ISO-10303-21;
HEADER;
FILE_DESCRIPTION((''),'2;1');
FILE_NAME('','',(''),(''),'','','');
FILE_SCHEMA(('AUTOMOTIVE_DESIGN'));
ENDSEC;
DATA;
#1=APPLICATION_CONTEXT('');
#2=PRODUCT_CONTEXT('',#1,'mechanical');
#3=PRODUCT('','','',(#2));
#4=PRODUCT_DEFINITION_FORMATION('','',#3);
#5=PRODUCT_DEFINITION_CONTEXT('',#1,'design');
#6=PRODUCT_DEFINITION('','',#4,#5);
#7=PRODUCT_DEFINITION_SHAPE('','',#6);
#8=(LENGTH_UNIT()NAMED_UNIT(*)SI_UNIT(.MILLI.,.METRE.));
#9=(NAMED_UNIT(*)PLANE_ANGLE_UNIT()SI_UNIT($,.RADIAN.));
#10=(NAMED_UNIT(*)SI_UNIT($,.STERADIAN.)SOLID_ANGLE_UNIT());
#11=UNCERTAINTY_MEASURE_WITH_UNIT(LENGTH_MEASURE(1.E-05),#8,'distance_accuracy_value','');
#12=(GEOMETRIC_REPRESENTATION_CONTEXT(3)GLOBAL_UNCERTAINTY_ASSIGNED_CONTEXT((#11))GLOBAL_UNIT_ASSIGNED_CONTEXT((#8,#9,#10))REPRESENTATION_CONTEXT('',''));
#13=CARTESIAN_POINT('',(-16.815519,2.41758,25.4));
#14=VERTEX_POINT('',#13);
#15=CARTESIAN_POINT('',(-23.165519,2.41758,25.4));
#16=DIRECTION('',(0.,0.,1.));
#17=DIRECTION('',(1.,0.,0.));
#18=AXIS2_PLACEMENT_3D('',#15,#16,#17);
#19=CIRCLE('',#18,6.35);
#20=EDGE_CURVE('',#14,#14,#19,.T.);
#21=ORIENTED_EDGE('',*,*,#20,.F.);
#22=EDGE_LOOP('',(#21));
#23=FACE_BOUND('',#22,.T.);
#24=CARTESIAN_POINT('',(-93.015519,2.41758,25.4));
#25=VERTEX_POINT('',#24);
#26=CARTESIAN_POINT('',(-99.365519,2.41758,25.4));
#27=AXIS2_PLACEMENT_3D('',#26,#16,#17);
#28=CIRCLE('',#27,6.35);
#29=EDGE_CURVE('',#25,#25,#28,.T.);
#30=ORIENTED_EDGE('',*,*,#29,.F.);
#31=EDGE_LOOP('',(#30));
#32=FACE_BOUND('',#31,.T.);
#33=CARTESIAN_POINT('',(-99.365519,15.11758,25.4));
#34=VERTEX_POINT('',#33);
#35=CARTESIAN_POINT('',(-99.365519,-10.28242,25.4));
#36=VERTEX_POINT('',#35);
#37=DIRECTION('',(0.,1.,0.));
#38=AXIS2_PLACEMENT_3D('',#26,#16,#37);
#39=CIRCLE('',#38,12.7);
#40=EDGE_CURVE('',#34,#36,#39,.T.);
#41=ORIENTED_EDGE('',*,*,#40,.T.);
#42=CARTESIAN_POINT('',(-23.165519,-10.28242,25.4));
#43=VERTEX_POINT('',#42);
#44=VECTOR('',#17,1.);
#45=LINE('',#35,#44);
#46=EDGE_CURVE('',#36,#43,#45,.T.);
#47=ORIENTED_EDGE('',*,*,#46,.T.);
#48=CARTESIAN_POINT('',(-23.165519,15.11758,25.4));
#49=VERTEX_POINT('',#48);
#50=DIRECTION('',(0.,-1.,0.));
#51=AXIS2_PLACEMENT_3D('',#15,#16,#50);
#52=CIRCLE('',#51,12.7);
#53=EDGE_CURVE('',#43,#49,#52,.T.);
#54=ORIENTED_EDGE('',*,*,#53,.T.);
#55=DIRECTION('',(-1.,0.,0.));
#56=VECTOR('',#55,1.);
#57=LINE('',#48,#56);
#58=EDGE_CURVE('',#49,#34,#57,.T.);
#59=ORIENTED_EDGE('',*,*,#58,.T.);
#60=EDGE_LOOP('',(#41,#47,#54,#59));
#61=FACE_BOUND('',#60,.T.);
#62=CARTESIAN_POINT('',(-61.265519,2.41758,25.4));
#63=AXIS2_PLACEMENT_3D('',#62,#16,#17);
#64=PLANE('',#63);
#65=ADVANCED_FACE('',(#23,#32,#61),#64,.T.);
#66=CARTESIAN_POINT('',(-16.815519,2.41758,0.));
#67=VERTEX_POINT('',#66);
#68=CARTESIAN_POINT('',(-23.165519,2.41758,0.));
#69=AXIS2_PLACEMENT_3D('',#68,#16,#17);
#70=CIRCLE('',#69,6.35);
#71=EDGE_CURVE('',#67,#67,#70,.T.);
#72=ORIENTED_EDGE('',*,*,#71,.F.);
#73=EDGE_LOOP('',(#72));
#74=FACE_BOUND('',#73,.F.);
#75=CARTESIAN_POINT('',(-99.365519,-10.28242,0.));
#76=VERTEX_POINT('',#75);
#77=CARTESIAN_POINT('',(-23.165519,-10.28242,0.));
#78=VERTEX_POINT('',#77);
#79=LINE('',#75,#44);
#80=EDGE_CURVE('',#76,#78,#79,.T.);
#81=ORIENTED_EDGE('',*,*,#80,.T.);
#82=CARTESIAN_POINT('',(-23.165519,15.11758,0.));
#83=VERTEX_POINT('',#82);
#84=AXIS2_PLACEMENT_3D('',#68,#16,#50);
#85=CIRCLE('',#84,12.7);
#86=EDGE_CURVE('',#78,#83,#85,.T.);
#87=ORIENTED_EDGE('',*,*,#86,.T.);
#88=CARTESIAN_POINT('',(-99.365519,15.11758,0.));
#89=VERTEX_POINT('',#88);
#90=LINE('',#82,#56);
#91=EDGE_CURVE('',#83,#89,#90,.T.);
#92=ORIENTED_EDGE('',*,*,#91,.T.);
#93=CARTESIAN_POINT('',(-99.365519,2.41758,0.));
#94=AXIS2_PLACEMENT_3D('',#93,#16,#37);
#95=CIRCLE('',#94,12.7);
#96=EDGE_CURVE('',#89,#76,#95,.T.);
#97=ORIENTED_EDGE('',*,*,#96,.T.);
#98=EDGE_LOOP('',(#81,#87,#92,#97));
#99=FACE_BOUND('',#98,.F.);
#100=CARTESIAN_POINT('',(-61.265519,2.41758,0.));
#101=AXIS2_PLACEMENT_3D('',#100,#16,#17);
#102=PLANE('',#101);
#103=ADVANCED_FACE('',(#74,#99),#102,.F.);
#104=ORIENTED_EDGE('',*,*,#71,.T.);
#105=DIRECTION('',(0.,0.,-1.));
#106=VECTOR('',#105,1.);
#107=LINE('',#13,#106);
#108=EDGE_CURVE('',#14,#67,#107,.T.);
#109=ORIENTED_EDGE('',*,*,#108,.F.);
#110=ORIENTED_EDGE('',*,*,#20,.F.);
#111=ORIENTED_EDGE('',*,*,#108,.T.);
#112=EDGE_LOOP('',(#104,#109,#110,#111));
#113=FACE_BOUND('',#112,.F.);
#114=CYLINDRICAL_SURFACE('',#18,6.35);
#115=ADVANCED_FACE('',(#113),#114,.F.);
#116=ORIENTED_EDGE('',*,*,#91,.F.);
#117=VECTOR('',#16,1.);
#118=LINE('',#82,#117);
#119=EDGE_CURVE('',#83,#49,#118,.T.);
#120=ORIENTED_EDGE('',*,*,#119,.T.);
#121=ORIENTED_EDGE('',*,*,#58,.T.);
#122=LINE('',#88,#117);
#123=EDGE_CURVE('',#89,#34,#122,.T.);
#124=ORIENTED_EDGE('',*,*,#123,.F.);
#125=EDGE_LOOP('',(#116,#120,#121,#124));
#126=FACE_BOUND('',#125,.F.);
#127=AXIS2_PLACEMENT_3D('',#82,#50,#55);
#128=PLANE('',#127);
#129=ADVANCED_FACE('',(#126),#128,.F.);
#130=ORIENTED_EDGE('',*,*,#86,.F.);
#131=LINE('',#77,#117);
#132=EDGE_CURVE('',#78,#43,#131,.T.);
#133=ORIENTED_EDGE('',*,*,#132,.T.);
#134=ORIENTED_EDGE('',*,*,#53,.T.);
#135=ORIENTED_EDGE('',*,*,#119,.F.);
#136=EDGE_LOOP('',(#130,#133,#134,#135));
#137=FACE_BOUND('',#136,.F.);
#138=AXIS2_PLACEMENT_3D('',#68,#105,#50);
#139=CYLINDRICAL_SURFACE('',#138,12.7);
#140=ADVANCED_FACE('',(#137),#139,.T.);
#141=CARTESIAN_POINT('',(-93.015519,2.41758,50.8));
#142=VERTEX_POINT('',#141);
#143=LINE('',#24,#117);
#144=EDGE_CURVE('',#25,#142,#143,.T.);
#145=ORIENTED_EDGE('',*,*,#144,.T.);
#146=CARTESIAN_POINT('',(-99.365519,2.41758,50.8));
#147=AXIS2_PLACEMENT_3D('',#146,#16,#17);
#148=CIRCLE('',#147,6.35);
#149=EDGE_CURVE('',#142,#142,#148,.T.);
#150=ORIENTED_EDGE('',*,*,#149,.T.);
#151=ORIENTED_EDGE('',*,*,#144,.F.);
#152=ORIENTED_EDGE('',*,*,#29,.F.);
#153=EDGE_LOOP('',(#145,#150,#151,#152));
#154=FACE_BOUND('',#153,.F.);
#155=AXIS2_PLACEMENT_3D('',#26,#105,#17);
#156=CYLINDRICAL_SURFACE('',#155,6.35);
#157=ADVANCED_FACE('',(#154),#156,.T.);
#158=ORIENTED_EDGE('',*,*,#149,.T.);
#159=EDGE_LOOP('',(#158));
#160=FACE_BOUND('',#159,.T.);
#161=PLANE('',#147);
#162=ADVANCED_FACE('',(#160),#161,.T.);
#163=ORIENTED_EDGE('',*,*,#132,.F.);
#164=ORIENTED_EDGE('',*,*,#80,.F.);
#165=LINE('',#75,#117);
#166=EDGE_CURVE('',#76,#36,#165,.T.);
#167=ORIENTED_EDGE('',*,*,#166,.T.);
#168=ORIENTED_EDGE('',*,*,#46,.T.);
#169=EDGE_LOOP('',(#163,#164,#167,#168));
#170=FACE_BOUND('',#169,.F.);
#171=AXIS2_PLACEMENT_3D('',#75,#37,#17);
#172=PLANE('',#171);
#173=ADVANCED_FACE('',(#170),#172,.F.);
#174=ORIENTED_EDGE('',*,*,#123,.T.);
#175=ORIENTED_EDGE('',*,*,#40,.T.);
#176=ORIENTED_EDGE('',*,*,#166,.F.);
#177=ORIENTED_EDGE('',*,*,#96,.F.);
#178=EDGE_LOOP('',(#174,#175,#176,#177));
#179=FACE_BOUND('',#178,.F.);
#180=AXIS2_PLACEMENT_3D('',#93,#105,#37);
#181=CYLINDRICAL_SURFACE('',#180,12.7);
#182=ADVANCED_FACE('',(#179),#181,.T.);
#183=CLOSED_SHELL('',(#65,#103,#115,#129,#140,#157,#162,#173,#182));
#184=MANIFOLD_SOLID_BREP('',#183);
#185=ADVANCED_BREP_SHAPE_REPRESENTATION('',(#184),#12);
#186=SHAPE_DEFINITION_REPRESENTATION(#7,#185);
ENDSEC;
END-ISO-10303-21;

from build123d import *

# Parameters (mm, degrees)
F2_DEPTH = 25.4
F3_R     = 6.35
F4_DEPTH = 25.4
F5_DEPTH = 25.4


# Not quite as in the source:
# - a variable given as a bare number and used for a length is read in inches; the dataset says mm whatever the document's units were


with BuildPart() as f2:
    # F1 (on Top) → F2 (new body)
    with BuildSketch(Plane.XY):
        with BuildLine():
            ThreePointArc((-23.1655191958, -10.2824198201), (-10.4655191958, 2.4175801799), (-23.1655191958, 15.1175801799))
            Line((-23.1655191958, 15.1175801799), (-99.3655191958, 15.1175801799))
            ThreePointArc((-99.3655191958, 15.1175801799), (-112.0655191958, 2.4175801799), (-99.3655191958, -10.2824198201))
            Line((-99.3655191958, -10.2824198201), (-23.1655191958, -10.2824198201))
        make_face()
    extrude(amount=F2_DEPTH)

    # F3 (on face) → F4 (join)
    with BuildSketch(Plane.XY.offset(25.4)):
        with Locations((-99.3655191958, 2.4175801799)):
            Circle(F3_R)
    extrude(amount=F4_DEPTH)

    # F3 (on face) → F5 (cut)
    with BuildSketch(Plane.XY.offset(25.4)):
        with Locations((-23.1655191958, 2.4175801799)):
            Circle(F3_R)
    extrude(amount=-F5_DEPTH, mode=Mode.SUBTRACT)


solid = f2.part
